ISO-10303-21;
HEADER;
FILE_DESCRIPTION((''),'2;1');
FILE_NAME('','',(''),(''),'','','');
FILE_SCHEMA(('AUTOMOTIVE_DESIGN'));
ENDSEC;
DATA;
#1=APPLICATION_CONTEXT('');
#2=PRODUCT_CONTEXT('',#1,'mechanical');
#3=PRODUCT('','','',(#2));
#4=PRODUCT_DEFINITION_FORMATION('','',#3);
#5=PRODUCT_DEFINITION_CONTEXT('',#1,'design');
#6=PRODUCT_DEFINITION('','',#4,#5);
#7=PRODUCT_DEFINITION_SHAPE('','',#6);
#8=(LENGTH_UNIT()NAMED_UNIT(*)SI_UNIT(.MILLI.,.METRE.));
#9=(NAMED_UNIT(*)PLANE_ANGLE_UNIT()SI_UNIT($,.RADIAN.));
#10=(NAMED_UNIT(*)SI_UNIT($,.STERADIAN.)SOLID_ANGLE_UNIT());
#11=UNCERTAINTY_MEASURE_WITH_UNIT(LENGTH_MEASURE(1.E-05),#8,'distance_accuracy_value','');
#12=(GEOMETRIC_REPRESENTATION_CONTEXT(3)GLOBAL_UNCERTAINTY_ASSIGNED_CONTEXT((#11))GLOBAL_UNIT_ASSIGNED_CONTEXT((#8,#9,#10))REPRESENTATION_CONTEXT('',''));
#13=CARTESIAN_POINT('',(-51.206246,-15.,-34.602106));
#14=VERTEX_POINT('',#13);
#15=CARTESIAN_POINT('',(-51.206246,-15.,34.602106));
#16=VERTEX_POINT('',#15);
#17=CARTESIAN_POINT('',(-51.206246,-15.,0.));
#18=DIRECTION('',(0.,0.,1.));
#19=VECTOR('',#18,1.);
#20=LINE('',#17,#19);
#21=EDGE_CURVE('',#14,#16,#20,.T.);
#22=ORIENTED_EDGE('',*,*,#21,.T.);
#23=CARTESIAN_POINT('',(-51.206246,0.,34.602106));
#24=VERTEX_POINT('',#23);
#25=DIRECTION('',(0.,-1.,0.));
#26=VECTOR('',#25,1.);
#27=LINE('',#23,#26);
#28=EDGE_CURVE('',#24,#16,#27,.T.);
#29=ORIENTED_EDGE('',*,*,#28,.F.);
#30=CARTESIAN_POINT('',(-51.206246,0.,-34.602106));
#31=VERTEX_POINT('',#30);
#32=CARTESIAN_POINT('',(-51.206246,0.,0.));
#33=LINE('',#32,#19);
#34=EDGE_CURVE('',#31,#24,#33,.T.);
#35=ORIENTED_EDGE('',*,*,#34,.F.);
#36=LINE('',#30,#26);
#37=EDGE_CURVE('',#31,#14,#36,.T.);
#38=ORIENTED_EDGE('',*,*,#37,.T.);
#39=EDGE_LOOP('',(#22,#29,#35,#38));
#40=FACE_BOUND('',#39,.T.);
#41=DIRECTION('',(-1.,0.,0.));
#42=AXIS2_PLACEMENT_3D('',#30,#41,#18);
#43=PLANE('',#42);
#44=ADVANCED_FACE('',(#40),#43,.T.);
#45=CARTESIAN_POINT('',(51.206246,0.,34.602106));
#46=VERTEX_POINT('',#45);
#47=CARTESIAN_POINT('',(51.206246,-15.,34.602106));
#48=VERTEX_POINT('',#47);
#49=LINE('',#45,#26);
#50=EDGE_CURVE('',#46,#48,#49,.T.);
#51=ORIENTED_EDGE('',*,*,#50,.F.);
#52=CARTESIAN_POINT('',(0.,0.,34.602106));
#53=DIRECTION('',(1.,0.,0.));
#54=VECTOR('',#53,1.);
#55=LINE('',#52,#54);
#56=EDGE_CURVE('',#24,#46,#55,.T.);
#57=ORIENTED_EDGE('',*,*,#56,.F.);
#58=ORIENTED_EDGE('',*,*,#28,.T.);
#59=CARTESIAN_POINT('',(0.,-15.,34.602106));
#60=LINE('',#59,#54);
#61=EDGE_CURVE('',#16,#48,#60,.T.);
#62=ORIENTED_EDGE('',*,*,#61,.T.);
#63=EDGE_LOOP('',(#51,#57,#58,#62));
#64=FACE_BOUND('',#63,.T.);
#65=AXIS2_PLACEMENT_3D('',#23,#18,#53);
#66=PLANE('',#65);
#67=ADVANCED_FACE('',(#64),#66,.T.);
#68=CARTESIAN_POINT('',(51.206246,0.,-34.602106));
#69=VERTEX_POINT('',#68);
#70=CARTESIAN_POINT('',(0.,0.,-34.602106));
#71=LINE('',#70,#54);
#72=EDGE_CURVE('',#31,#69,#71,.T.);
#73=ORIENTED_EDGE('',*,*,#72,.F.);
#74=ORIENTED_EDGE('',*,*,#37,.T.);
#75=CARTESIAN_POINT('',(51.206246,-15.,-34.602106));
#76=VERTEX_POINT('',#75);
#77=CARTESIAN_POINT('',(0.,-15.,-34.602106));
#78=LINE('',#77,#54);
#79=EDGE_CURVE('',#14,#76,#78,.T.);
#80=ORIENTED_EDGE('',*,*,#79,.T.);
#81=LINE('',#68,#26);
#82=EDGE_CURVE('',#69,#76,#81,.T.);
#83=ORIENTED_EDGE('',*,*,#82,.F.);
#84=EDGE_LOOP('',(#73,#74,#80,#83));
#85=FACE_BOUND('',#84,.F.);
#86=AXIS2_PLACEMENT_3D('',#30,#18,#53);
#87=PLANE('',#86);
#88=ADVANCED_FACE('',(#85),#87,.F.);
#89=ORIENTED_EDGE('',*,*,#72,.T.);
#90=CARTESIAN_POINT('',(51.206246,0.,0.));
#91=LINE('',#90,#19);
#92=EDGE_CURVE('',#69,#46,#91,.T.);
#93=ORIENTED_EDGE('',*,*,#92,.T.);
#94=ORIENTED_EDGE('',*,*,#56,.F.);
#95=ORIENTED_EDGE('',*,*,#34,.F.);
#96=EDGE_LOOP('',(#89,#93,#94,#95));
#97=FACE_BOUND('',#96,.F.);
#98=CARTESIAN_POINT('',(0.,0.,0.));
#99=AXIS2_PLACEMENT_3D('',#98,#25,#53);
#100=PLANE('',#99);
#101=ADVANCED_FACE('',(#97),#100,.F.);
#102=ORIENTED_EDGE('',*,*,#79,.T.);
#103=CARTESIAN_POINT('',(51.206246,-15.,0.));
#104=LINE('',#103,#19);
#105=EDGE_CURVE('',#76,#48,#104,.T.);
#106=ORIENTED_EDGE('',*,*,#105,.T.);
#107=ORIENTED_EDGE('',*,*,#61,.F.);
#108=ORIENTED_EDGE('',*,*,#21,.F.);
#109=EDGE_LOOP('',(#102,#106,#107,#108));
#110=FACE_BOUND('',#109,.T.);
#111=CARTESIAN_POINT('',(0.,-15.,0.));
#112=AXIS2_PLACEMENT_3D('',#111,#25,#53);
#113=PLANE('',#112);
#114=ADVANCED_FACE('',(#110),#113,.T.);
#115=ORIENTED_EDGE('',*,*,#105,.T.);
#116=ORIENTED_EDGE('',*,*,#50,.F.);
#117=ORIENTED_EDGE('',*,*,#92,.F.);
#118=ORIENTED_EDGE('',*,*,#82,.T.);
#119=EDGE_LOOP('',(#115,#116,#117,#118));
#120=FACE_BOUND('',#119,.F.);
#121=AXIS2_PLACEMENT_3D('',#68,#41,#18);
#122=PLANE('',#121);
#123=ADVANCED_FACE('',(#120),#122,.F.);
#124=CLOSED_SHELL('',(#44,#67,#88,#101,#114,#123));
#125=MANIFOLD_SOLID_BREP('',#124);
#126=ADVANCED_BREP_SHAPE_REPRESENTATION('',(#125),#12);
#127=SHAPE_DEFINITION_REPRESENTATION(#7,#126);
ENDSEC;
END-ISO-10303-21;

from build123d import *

# Parameters (mm, degrees)
F0_W     = 102.4124920368
F0_H     = 69.204211235
F1_DEPTH = 15


# Not quite as in the source:
# - the program builds the solid bodies; features that only make, move or delete a surface that nothing else refers to are left out


with BuildPart() as f1:
    # F0 (on Front) → F1 (new body)
    with BuildSketch(Plane.XZ):
        Rectangle(F0_W, F0_H)
    extrude(amount=F1_DEPTH)


solid = f1.part
